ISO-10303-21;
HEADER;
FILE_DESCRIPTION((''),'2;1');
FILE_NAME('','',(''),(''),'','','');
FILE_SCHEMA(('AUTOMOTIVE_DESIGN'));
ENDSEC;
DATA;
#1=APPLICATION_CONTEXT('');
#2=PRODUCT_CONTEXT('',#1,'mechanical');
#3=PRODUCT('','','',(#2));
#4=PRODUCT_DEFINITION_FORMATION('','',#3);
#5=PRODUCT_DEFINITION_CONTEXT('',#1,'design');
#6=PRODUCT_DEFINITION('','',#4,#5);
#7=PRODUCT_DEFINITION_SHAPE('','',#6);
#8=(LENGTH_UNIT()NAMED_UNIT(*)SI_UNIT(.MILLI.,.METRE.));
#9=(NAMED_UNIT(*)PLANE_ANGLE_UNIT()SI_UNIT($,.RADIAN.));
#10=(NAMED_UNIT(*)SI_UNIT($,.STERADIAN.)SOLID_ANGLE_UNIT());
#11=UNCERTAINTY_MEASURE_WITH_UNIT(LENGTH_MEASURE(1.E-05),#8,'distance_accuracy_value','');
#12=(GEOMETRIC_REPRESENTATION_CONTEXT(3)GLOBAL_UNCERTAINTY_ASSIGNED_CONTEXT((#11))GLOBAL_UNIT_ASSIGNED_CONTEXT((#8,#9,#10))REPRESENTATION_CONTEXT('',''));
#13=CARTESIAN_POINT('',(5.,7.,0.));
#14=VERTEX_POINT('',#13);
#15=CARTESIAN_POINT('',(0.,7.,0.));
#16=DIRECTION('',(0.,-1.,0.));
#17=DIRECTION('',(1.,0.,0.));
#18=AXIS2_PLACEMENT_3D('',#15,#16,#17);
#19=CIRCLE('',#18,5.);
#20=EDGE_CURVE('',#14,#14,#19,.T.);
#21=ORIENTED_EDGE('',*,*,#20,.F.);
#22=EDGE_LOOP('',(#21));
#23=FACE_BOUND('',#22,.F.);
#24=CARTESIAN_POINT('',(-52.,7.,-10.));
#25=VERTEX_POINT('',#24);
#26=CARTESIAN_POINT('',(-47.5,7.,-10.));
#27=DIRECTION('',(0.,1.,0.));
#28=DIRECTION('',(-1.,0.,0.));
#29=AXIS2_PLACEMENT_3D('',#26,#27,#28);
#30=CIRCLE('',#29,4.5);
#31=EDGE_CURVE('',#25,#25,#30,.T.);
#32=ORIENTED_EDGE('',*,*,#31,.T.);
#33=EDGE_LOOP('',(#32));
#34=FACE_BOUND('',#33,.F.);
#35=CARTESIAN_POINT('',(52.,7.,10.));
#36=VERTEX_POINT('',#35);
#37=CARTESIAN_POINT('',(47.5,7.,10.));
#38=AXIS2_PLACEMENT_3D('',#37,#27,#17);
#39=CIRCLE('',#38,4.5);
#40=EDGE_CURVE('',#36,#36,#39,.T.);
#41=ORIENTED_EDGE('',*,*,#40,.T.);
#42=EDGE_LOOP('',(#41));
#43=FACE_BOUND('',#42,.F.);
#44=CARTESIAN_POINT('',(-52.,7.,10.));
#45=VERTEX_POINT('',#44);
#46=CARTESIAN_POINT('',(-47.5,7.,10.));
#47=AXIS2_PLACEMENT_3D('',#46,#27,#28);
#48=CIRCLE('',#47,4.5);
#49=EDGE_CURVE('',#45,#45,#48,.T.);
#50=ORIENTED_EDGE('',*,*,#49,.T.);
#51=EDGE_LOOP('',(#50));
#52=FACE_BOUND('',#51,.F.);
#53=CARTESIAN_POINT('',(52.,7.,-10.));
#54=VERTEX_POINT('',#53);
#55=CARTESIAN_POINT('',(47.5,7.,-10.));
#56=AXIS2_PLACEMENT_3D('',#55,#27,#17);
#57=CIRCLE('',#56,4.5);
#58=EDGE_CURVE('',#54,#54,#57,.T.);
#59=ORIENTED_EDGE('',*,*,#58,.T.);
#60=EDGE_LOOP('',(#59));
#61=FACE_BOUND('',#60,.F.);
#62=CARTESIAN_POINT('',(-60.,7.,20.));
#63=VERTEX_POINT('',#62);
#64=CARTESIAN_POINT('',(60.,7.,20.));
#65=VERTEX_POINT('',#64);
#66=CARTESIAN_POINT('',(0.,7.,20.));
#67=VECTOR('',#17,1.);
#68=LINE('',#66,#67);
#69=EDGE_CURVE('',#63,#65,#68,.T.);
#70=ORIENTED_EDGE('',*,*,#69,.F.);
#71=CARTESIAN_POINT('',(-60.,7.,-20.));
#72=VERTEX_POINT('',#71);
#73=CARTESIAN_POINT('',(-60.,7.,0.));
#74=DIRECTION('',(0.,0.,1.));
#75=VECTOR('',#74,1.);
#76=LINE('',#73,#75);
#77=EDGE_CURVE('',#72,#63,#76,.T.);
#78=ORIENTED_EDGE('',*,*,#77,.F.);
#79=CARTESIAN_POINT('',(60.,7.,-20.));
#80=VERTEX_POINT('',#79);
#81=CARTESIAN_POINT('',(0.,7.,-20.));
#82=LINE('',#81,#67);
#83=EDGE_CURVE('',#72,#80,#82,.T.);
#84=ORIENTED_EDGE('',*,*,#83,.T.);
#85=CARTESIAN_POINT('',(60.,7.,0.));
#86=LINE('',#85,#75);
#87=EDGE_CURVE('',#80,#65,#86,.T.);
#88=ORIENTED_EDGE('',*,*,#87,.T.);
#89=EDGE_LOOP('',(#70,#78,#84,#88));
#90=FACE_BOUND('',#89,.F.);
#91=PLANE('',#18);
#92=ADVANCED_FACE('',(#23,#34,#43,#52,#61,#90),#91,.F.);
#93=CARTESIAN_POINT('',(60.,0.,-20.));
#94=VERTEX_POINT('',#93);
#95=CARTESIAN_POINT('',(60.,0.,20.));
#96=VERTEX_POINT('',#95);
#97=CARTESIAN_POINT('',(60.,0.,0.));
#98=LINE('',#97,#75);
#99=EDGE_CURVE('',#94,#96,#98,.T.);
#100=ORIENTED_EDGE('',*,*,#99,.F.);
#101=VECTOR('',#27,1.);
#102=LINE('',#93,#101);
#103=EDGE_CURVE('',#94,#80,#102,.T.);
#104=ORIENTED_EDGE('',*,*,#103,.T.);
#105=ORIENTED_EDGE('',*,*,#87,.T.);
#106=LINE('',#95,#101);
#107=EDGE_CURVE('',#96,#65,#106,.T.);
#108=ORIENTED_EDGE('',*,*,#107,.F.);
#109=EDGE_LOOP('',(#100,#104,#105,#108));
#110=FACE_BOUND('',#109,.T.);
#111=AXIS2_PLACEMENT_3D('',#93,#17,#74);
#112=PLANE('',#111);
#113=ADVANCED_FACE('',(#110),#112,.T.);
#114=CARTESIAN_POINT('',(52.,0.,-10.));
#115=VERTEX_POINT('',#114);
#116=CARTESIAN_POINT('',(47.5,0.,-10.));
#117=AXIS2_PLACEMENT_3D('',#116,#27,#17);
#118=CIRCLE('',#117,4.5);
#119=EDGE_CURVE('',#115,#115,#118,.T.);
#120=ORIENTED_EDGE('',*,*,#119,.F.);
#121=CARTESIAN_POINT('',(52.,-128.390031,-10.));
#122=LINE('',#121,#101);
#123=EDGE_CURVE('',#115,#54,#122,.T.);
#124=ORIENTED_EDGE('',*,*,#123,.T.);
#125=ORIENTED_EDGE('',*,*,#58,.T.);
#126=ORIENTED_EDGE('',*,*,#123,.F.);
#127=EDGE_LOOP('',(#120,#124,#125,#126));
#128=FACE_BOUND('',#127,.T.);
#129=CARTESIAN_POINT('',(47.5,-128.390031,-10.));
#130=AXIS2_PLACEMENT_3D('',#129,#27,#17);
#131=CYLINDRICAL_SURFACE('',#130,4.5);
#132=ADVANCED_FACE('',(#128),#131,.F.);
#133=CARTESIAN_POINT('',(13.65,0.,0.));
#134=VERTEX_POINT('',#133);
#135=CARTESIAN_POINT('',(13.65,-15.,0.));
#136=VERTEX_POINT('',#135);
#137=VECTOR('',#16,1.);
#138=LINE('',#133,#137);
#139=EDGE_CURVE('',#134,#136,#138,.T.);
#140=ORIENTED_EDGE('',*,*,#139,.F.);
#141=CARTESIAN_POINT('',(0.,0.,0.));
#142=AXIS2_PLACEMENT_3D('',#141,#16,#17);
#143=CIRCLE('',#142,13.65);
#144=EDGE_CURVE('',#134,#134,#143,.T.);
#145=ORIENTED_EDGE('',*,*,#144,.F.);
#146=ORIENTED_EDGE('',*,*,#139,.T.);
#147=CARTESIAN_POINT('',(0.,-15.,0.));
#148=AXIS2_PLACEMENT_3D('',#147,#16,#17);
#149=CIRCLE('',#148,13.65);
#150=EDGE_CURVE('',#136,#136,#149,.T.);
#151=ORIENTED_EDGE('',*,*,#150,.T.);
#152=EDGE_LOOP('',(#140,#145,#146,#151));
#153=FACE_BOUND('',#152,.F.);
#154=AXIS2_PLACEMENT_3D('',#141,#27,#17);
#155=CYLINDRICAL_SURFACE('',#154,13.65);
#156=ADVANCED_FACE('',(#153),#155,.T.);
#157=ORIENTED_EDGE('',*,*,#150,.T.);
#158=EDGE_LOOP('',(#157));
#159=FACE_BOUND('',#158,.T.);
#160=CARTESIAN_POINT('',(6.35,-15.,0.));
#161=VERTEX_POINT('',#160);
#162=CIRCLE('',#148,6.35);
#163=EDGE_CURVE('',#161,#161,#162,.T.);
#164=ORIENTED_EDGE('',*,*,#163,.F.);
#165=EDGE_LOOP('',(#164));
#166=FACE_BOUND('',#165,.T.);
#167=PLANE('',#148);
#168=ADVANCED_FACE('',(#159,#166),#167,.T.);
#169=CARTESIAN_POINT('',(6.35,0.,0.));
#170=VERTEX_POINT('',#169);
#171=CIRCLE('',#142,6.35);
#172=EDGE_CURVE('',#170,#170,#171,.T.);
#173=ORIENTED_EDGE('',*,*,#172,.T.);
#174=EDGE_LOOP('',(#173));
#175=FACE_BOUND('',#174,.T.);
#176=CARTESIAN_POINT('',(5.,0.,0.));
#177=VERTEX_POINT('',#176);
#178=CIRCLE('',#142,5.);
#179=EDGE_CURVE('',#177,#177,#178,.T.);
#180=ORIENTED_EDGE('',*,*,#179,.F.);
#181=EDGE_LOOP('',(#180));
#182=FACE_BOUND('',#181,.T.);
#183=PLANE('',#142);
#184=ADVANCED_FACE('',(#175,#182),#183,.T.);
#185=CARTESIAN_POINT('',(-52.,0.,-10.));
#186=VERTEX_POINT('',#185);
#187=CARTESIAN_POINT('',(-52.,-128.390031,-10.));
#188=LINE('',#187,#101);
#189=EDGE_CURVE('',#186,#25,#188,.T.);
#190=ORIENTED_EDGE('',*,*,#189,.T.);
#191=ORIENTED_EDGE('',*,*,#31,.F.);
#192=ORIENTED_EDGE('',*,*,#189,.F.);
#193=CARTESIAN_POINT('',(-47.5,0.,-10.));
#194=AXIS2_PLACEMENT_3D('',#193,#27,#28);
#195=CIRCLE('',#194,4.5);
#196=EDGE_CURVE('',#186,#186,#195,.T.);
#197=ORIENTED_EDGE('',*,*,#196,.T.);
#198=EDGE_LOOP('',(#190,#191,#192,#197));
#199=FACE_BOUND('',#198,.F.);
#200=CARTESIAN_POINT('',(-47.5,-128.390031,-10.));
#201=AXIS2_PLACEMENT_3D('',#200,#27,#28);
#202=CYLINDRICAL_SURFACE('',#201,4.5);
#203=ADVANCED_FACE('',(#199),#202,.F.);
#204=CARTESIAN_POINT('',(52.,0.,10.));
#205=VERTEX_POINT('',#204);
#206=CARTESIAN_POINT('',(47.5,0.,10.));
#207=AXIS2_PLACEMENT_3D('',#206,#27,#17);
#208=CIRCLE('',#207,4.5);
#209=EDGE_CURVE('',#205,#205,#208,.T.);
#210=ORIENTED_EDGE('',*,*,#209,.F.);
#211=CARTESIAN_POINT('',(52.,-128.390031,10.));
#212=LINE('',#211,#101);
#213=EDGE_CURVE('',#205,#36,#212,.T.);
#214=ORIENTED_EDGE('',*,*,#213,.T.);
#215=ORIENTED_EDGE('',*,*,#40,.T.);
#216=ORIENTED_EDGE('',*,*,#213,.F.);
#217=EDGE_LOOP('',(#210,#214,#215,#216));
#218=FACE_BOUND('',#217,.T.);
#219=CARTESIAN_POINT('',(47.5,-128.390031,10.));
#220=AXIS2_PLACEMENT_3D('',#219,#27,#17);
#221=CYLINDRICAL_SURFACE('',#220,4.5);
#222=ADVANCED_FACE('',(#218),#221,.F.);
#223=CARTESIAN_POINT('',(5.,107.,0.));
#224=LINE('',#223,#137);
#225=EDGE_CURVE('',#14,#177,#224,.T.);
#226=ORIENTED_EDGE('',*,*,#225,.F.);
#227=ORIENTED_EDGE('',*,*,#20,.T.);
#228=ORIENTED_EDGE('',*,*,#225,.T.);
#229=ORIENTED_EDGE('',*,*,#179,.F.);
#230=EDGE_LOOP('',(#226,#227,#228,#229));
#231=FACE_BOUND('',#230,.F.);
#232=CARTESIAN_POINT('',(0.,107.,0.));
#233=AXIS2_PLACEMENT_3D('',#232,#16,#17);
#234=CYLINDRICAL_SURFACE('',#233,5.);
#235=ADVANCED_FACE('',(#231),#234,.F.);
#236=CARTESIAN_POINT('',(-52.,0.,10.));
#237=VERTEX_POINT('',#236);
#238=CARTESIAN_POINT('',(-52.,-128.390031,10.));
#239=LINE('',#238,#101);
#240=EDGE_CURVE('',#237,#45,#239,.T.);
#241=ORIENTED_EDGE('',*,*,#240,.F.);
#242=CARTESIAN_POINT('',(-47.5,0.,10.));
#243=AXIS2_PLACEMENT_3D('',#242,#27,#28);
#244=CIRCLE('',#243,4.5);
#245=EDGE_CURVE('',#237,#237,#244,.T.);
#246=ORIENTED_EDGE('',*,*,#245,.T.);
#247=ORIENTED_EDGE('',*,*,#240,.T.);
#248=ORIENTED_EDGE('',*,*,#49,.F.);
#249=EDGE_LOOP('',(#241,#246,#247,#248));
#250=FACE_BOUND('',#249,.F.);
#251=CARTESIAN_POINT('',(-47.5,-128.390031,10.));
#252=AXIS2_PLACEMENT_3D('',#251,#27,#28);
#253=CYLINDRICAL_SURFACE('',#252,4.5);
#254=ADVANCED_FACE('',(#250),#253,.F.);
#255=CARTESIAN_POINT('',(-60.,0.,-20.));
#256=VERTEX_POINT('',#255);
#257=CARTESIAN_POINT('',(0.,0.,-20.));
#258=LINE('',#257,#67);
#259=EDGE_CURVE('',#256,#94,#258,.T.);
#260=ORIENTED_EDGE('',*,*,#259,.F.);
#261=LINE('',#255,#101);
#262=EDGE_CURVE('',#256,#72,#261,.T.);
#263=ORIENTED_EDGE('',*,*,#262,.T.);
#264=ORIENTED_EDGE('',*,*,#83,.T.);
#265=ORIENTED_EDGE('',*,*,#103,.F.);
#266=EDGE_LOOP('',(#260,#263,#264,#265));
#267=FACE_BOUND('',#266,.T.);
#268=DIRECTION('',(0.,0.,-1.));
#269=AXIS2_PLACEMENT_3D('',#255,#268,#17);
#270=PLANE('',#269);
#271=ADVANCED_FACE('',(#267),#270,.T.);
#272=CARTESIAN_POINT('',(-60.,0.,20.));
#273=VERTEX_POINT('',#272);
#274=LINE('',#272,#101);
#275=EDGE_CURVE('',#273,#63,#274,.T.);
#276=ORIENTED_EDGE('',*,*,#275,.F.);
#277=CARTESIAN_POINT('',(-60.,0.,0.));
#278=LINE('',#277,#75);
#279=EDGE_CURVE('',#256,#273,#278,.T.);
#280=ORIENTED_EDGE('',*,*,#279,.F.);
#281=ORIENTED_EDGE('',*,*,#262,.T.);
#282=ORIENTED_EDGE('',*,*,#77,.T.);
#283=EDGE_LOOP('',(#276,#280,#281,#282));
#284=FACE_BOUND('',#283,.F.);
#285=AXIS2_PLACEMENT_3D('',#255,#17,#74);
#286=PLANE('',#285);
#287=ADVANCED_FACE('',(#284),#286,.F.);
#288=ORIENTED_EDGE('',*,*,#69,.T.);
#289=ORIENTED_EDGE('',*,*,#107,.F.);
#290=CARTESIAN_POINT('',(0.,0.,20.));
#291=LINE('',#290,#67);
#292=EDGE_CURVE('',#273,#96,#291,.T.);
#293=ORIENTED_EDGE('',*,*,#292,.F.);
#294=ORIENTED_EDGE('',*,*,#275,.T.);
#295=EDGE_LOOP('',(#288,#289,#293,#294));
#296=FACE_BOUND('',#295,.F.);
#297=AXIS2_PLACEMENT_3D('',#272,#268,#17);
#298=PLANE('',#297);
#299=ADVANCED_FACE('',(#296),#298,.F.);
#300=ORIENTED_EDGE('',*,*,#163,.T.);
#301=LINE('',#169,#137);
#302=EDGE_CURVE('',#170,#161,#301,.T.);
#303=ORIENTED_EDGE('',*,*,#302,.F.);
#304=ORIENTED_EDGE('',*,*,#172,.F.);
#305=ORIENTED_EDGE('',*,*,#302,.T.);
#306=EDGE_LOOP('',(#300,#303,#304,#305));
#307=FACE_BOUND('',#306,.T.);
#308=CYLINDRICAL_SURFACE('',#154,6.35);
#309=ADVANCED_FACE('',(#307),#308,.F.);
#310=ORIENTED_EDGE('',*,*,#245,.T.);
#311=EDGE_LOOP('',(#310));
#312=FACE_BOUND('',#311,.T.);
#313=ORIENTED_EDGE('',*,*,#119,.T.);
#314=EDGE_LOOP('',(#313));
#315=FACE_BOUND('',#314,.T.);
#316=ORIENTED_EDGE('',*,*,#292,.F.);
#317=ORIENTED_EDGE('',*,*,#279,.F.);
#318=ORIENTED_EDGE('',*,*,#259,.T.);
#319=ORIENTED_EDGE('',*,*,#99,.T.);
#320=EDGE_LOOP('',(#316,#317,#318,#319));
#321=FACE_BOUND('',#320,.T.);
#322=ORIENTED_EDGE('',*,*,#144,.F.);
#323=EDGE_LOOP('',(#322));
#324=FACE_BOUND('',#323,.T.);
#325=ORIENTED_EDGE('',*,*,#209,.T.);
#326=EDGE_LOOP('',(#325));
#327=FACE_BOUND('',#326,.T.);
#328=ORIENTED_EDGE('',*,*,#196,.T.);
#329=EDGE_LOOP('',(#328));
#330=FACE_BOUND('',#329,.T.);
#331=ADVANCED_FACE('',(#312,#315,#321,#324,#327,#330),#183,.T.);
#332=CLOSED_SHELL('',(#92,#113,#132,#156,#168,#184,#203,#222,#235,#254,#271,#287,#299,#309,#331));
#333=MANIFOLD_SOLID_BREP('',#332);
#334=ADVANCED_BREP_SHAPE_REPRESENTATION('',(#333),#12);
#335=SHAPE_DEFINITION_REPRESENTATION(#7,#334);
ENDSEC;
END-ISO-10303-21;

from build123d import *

# Parameters (mm, degrees)
F0_R     = 13.65
F0_R_2   = 6.35
F1_DEPTH = 15
F2_W     = 120
F2_H     = 40
F3_DEPTH = 7
F5_D     = 9
F7_D     = 10
F7_DEPTH = 100
F7_TIP   = 3.0043030951


# Not quite as in the source:
# - a pattern or mirror of a feature is missing from the dataset's text; its kind, count and spacing are read off the source's solid


with BuildPart() as f1:
    # F0 (on Front) → F1 (new body)
    with BuildSketch(Plane.XZ):
        Circle(F0_R)
        Circle(F0_R_2, mode=Mode.SUBTRACT)
    extrude(amount=F1_DEPTH)

    # F2 (on Front) → F3 (join)
    with BuildSketch(Plane.XZ):
        Rectangle(F2_W, F2_H)
    extrude(amount=-F3_DEPTH)

    # F5 (through all)
    with Locations(Plane.XZ):
        with Locations((-47.5, 10), (-47.5, -10)):
            f5 = Hole(F5_D / 2)

    # F5_copies: F5 across plane
    add(f5.mirror(Plane(origin=(0, 0, 0), x_dir=(0, 0, 1), z_dir=(1, 0, 0))), mode=Mode.SUBTRACT)

    # F7
    with Locations(Plane(origin=(0, 7, 0), x_dir=(-1, 0, 0), z_dir=(0, 1, 0))):
        with Locations((0, 0)):
            Hole(F7_D / 2, depth=F7_DEPTH)
            with Locations((0, 0, -(F7_DEPTH + F7_TIP / 2))):  # 118° drill point
                Cone(0, F7_D / 2, F7_TIP, mode=Mode.SUBTRACT)


solid = f1.part
